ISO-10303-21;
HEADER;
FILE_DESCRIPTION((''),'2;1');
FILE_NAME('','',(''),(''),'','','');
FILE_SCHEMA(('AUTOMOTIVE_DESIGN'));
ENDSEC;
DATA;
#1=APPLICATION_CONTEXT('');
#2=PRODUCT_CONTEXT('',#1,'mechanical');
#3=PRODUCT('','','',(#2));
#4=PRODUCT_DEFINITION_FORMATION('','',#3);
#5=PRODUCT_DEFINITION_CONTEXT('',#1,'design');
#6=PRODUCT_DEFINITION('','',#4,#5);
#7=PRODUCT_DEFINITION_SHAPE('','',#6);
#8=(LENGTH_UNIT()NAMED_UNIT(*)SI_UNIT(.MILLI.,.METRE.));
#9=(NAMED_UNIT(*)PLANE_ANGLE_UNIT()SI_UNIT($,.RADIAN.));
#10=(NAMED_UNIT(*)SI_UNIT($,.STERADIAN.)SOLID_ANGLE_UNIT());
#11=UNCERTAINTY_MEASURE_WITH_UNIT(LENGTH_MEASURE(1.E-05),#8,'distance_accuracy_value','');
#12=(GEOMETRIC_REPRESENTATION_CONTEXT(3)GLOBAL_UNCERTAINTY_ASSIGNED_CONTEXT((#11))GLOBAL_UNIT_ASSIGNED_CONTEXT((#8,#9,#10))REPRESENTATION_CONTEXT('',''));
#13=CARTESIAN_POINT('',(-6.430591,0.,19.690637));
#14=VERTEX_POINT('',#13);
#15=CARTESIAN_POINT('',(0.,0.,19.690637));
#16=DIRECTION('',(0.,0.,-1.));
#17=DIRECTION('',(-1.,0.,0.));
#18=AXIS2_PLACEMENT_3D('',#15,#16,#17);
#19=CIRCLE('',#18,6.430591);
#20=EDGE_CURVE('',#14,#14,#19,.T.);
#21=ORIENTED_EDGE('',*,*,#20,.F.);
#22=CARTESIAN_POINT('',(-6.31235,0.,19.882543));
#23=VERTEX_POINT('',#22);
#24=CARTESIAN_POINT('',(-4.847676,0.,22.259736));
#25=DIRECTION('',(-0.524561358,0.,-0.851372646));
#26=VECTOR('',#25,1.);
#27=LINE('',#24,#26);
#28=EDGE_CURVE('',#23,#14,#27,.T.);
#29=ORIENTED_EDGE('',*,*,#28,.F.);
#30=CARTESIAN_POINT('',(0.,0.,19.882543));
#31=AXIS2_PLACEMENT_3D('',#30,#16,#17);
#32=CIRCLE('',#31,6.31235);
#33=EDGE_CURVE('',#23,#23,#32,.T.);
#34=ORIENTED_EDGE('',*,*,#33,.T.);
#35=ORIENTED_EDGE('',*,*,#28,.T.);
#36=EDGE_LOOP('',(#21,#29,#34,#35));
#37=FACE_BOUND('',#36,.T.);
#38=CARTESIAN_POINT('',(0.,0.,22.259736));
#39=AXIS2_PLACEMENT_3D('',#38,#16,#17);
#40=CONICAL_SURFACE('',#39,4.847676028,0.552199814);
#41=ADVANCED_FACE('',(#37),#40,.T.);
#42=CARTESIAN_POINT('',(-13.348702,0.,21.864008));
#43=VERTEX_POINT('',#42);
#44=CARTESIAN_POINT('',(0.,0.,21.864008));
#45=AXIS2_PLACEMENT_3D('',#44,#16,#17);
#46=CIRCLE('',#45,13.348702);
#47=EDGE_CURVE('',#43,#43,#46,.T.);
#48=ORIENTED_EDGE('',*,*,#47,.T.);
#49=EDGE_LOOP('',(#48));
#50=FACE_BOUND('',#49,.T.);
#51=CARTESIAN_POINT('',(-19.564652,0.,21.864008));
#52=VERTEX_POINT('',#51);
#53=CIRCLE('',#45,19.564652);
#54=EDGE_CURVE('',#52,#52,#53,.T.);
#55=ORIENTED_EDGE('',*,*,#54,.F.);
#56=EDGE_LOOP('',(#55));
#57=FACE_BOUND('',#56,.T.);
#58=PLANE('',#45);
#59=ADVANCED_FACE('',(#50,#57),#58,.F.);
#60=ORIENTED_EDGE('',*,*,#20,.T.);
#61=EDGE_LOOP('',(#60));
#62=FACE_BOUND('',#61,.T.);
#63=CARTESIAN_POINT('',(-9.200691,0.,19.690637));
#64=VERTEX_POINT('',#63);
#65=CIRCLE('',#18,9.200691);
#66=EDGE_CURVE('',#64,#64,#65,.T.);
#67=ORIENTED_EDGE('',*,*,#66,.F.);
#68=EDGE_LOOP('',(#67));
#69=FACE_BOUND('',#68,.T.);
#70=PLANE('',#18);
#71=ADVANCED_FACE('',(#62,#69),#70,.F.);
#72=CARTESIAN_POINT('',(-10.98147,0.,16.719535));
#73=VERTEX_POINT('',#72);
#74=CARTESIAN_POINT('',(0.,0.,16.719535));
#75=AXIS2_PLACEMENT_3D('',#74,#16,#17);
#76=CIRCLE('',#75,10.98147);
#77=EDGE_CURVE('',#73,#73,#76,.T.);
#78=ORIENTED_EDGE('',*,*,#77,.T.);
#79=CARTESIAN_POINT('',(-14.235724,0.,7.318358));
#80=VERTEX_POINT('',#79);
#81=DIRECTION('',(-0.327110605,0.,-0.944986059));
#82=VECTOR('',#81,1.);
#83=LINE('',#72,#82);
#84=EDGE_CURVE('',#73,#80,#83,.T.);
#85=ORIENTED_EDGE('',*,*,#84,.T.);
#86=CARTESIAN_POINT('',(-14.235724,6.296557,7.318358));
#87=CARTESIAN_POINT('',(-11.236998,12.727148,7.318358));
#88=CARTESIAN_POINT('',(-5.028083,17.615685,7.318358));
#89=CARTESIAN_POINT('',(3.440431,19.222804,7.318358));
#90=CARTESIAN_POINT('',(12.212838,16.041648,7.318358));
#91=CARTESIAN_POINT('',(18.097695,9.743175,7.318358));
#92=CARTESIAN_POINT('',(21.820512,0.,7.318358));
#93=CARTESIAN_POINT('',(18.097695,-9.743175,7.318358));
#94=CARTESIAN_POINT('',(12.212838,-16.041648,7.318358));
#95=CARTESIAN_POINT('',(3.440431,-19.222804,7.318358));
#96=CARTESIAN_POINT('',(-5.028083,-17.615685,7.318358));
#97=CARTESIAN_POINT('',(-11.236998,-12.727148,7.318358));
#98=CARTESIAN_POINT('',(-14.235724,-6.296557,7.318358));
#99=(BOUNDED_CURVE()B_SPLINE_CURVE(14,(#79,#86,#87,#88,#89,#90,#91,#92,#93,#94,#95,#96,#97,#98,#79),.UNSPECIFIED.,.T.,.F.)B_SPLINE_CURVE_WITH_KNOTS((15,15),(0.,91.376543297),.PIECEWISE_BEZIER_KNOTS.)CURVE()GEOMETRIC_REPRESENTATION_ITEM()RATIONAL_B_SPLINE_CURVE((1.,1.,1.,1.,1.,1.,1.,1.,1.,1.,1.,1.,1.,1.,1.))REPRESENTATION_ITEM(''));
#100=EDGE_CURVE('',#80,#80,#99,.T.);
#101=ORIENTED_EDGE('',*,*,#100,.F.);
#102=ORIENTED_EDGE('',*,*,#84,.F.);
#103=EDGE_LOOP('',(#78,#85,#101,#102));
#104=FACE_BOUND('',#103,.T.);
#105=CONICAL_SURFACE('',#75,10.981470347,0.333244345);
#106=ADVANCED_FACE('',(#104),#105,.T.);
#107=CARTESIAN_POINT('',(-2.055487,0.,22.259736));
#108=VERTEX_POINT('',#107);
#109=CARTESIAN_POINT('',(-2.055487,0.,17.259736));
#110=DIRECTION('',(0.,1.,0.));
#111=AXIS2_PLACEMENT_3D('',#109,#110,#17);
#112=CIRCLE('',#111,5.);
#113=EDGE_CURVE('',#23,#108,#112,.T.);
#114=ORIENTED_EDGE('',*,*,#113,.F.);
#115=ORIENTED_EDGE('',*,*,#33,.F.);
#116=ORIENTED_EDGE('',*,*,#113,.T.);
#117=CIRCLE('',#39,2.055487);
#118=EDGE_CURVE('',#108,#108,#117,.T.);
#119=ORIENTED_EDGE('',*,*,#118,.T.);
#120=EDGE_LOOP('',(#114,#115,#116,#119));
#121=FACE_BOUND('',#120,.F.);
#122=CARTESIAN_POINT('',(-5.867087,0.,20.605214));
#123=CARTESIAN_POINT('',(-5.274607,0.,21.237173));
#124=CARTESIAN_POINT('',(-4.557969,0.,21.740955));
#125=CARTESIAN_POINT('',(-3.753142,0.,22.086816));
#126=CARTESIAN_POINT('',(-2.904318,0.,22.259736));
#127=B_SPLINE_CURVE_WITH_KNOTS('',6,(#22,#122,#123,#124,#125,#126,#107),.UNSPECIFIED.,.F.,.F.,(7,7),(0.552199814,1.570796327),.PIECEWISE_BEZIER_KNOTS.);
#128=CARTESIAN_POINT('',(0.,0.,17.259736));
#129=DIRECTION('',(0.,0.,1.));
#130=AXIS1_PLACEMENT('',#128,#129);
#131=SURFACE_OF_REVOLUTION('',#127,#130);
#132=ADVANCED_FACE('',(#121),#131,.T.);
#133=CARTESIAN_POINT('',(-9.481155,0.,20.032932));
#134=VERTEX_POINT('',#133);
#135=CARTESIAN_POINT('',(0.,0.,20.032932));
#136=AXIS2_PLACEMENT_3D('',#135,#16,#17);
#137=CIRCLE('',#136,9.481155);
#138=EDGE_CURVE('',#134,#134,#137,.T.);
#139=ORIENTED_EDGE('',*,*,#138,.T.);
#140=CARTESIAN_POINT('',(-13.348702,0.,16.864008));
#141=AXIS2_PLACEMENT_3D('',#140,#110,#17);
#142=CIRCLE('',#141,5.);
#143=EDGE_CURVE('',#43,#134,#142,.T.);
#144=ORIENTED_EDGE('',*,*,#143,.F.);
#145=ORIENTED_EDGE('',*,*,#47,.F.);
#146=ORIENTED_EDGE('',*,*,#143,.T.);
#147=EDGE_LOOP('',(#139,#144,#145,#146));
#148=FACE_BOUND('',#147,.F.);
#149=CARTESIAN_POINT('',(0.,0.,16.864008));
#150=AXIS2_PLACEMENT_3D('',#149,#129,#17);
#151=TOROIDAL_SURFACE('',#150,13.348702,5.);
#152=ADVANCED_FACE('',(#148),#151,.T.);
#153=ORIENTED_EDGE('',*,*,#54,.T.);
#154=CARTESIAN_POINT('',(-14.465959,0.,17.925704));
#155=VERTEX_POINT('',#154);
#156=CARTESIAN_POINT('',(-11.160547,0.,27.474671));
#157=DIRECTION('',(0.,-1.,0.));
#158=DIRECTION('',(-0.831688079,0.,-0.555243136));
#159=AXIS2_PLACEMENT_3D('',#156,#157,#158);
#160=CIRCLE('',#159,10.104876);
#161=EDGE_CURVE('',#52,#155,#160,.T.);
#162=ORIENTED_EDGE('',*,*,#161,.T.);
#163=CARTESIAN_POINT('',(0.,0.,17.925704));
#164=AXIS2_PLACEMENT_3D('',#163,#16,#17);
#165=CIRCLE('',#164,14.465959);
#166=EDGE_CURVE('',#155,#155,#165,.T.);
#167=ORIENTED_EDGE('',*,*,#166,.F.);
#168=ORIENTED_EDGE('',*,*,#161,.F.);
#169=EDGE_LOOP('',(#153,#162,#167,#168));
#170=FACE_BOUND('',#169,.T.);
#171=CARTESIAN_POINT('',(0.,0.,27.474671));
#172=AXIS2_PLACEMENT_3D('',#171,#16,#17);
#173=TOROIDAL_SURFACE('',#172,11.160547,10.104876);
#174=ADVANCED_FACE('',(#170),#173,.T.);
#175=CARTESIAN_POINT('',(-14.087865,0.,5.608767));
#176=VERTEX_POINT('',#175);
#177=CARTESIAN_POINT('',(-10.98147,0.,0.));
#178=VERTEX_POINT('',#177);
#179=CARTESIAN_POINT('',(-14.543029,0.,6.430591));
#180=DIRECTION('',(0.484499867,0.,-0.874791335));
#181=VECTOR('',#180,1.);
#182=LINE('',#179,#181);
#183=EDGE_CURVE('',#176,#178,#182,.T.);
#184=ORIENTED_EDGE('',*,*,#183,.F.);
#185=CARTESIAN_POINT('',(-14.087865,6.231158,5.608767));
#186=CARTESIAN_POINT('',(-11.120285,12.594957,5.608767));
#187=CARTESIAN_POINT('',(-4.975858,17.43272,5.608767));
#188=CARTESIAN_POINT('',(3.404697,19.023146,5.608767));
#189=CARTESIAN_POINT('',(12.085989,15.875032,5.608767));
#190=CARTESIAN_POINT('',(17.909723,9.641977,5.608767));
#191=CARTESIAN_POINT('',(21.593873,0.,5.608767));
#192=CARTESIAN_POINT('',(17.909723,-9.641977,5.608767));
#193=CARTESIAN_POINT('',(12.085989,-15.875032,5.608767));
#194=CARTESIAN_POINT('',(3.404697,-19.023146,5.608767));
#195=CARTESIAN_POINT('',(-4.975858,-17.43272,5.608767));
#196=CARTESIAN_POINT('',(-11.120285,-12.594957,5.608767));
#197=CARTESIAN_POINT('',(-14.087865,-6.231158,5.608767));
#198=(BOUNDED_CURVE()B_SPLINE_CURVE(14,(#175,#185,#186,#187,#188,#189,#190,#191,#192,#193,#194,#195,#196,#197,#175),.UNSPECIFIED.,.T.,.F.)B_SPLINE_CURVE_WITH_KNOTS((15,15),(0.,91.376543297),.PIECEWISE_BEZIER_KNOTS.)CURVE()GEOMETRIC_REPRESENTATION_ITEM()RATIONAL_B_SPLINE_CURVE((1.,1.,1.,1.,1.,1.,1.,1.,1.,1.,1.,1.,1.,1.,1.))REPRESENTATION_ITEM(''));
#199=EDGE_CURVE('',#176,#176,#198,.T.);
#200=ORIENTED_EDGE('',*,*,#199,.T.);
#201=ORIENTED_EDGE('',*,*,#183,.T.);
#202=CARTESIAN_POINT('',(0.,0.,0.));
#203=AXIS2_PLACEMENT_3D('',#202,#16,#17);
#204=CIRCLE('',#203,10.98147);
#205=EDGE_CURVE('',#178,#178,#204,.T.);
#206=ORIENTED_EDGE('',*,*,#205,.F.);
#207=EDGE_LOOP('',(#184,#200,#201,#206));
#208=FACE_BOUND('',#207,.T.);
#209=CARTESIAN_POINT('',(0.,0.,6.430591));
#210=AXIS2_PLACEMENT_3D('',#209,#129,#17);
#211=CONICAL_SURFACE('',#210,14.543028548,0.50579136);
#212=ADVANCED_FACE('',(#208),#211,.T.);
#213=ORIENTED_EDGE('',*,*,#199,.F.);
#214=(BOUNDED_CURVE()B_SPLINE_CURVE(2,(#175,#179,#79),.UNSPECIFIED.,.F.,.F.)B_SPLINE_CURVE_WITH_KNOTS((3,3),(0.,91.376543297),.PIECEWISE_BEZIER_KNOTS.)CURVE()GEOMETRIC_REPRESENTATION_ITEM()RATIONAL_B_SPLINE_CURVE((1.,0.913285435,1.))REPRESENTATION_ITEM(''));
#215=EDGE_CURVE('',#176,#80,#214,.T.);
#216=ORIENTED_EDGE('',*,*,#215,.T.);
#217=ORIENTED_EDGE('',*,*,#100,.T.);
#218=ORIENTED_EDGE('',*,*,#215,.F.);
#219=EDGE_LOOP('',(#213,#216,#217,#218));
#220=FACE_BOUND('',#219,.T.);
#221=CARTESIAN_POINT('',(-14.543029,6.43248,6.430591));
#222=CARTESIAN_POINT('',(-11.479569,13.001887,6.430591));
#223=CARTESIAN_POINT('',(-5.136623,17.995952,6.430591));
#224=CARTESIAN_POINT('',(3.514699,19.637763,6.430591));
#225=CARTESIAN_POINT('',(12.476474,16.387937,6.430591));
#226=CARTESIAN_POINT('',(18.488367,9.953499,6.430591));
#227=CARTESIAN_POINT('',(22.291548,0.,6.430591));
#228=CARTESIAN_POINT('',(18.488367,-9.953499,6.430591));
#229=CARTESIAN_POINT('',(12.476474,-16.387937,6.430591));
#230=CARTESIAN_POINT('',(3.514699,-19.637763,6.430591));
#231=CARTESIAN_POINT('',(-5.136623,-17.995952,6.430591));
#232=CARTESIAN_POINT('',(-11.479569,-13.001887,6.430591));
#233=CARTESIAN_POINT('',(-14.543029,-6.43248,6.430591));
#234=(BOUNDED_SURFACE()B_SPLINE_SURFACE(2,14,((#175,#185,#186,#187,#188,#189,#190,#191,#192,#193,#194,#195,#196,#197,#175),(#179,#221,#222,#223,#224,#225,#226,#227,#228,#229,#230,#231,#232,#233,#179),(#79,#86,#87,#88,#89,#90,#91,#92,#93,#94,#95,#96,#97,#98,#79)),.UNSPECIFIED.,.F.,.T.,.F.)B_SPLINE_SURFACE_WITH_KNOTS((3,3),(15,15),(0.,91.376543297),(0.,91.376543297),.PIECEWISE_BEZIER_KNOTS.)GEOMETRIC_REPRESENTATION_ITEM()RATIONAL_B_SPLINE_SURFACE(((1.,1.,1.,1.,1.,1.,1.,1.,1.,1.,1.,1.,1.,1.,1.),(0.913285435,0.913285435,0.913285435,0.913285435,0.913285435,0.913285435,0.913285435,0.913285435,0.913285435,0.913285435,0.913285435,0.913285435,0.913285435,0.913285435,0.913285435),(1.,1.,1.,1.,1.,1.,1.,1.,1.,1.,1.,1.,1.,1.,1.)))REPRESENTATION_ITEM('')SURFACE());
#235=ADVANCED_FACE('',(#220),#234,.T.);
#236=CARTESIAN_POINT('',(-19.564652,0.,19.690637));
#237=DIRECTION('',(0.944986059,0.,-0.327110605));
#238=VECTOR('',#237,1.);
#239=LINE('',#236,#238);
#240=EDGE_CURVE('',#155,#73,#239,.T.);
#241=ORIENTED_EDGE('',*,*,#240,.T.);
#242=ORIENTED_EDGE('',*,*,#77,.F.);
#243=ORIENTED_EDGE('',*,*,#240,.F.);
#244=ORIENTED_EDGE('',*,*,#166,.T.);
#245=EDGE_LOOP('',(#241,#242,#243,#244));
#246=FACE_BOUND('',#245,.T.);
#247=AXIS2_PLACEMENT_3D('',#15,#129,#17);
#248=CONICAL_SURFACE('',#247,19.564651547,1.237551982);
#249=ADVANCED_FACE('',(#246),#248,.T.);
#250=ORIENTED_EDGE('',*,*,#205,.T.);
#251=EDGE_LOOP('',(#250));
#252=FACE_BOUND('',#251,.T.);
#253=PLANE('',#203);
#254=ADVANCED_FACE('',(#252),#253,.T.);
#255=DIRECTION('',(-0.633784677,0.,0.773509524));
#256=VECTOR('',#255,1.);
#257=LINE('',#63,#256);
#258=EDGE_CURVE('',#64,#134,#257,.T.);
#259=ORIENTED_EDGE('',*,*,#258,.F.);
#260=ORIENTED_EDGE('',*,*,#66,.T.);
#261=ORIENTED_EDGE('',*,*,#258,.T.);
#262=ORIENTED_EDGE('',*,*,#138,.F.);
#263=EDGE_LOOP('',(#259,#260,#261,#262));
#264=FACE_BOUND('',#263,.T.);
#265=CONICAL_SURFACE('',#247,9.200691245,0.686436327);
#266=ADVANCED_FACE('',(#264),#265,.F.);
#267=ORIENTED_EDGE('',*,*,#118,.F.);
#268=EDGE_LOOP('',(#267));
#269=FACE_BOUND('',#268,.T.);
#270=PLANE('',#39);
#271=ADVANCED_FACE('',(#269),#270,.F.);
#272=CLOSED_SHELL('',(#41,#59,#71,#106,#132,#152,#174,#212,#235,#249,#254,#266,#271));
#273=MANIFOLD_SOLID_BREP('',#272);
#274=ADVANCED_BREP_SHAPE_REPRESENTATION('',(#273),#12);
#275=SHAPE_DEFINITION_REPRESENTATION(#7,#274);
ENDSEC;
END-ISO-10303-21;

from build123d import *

# Parameters (mm, degrees)
F3_R = 2.1064176113
F4_R = 5


# Not quite as in the source:
# - a fillet or chamfer that OpenCascade refuses, or shapes differently, is made with other operations: its cross-section is extruded or revolved along the edge and cut away or added


with BuildPart() as f1:
    # F0 (on Front) → F1 (revolve)
    with BuildSketch(Plane.XZ):
        Polygon((-10.9814703465, 0), (0, 0), (0, 22.2597364336), (-4.8476760276, 22.2597364336), (-6.4305909909, 19.6906365962), (-9.2006912455, 19.6906365962), (-10.9814703465, 21.8640081584), (-19.5646515468, 21.8640081584), (-19.5646515468, 19.6906365962), (-10.9814703465, 16.7195349932), (-14.5430285484, 6.4305905253), align=None)
    revolve(axis=Axis((0, 0, 11.1298682168), (0, 0, -1)))

    # F2: fillet of radius 10.1048761085 on 1 edges, made by hand

    # F2_s1 → F2_t2 (revolve, cut)
    with BuildSketch(Plane.XZ):
        with BuildLine():
            ThreePointArc((-19.5646515468, 21.8640081584), (-17.3375812271, 19.4776240652), (-14.4659586897, 17.9257042049))
            Line((-14.4659586897, 17.9257042049), (-19.5646515468, 19.6906365962))
            Line((-19.5646515468, 19.6906365962), (-19.5646515468, 21.8640081584))
        make_face()
    revolve(axis=Axis((0, 0, 19.6906365962), (0, 0, -1)), mode=Mode.SUBTRACT)

    # F3
    f3_edges = [f1.edges().sort_by_distance(p)[0] for p in [
        (14.543029, 0, 6.430591),
    ]]
    fillet(f3_edges, radius=F3_R)

    # F4
    f4_edges = [f1.edges().sort_by_distance(p)[0] for p in [
        (10.98147, 0, 21.864008),
        (4.847676, 0, 22.259736),
    ]]
    fillet(f4_edges, radius=F4_R)


solid = f1.part
